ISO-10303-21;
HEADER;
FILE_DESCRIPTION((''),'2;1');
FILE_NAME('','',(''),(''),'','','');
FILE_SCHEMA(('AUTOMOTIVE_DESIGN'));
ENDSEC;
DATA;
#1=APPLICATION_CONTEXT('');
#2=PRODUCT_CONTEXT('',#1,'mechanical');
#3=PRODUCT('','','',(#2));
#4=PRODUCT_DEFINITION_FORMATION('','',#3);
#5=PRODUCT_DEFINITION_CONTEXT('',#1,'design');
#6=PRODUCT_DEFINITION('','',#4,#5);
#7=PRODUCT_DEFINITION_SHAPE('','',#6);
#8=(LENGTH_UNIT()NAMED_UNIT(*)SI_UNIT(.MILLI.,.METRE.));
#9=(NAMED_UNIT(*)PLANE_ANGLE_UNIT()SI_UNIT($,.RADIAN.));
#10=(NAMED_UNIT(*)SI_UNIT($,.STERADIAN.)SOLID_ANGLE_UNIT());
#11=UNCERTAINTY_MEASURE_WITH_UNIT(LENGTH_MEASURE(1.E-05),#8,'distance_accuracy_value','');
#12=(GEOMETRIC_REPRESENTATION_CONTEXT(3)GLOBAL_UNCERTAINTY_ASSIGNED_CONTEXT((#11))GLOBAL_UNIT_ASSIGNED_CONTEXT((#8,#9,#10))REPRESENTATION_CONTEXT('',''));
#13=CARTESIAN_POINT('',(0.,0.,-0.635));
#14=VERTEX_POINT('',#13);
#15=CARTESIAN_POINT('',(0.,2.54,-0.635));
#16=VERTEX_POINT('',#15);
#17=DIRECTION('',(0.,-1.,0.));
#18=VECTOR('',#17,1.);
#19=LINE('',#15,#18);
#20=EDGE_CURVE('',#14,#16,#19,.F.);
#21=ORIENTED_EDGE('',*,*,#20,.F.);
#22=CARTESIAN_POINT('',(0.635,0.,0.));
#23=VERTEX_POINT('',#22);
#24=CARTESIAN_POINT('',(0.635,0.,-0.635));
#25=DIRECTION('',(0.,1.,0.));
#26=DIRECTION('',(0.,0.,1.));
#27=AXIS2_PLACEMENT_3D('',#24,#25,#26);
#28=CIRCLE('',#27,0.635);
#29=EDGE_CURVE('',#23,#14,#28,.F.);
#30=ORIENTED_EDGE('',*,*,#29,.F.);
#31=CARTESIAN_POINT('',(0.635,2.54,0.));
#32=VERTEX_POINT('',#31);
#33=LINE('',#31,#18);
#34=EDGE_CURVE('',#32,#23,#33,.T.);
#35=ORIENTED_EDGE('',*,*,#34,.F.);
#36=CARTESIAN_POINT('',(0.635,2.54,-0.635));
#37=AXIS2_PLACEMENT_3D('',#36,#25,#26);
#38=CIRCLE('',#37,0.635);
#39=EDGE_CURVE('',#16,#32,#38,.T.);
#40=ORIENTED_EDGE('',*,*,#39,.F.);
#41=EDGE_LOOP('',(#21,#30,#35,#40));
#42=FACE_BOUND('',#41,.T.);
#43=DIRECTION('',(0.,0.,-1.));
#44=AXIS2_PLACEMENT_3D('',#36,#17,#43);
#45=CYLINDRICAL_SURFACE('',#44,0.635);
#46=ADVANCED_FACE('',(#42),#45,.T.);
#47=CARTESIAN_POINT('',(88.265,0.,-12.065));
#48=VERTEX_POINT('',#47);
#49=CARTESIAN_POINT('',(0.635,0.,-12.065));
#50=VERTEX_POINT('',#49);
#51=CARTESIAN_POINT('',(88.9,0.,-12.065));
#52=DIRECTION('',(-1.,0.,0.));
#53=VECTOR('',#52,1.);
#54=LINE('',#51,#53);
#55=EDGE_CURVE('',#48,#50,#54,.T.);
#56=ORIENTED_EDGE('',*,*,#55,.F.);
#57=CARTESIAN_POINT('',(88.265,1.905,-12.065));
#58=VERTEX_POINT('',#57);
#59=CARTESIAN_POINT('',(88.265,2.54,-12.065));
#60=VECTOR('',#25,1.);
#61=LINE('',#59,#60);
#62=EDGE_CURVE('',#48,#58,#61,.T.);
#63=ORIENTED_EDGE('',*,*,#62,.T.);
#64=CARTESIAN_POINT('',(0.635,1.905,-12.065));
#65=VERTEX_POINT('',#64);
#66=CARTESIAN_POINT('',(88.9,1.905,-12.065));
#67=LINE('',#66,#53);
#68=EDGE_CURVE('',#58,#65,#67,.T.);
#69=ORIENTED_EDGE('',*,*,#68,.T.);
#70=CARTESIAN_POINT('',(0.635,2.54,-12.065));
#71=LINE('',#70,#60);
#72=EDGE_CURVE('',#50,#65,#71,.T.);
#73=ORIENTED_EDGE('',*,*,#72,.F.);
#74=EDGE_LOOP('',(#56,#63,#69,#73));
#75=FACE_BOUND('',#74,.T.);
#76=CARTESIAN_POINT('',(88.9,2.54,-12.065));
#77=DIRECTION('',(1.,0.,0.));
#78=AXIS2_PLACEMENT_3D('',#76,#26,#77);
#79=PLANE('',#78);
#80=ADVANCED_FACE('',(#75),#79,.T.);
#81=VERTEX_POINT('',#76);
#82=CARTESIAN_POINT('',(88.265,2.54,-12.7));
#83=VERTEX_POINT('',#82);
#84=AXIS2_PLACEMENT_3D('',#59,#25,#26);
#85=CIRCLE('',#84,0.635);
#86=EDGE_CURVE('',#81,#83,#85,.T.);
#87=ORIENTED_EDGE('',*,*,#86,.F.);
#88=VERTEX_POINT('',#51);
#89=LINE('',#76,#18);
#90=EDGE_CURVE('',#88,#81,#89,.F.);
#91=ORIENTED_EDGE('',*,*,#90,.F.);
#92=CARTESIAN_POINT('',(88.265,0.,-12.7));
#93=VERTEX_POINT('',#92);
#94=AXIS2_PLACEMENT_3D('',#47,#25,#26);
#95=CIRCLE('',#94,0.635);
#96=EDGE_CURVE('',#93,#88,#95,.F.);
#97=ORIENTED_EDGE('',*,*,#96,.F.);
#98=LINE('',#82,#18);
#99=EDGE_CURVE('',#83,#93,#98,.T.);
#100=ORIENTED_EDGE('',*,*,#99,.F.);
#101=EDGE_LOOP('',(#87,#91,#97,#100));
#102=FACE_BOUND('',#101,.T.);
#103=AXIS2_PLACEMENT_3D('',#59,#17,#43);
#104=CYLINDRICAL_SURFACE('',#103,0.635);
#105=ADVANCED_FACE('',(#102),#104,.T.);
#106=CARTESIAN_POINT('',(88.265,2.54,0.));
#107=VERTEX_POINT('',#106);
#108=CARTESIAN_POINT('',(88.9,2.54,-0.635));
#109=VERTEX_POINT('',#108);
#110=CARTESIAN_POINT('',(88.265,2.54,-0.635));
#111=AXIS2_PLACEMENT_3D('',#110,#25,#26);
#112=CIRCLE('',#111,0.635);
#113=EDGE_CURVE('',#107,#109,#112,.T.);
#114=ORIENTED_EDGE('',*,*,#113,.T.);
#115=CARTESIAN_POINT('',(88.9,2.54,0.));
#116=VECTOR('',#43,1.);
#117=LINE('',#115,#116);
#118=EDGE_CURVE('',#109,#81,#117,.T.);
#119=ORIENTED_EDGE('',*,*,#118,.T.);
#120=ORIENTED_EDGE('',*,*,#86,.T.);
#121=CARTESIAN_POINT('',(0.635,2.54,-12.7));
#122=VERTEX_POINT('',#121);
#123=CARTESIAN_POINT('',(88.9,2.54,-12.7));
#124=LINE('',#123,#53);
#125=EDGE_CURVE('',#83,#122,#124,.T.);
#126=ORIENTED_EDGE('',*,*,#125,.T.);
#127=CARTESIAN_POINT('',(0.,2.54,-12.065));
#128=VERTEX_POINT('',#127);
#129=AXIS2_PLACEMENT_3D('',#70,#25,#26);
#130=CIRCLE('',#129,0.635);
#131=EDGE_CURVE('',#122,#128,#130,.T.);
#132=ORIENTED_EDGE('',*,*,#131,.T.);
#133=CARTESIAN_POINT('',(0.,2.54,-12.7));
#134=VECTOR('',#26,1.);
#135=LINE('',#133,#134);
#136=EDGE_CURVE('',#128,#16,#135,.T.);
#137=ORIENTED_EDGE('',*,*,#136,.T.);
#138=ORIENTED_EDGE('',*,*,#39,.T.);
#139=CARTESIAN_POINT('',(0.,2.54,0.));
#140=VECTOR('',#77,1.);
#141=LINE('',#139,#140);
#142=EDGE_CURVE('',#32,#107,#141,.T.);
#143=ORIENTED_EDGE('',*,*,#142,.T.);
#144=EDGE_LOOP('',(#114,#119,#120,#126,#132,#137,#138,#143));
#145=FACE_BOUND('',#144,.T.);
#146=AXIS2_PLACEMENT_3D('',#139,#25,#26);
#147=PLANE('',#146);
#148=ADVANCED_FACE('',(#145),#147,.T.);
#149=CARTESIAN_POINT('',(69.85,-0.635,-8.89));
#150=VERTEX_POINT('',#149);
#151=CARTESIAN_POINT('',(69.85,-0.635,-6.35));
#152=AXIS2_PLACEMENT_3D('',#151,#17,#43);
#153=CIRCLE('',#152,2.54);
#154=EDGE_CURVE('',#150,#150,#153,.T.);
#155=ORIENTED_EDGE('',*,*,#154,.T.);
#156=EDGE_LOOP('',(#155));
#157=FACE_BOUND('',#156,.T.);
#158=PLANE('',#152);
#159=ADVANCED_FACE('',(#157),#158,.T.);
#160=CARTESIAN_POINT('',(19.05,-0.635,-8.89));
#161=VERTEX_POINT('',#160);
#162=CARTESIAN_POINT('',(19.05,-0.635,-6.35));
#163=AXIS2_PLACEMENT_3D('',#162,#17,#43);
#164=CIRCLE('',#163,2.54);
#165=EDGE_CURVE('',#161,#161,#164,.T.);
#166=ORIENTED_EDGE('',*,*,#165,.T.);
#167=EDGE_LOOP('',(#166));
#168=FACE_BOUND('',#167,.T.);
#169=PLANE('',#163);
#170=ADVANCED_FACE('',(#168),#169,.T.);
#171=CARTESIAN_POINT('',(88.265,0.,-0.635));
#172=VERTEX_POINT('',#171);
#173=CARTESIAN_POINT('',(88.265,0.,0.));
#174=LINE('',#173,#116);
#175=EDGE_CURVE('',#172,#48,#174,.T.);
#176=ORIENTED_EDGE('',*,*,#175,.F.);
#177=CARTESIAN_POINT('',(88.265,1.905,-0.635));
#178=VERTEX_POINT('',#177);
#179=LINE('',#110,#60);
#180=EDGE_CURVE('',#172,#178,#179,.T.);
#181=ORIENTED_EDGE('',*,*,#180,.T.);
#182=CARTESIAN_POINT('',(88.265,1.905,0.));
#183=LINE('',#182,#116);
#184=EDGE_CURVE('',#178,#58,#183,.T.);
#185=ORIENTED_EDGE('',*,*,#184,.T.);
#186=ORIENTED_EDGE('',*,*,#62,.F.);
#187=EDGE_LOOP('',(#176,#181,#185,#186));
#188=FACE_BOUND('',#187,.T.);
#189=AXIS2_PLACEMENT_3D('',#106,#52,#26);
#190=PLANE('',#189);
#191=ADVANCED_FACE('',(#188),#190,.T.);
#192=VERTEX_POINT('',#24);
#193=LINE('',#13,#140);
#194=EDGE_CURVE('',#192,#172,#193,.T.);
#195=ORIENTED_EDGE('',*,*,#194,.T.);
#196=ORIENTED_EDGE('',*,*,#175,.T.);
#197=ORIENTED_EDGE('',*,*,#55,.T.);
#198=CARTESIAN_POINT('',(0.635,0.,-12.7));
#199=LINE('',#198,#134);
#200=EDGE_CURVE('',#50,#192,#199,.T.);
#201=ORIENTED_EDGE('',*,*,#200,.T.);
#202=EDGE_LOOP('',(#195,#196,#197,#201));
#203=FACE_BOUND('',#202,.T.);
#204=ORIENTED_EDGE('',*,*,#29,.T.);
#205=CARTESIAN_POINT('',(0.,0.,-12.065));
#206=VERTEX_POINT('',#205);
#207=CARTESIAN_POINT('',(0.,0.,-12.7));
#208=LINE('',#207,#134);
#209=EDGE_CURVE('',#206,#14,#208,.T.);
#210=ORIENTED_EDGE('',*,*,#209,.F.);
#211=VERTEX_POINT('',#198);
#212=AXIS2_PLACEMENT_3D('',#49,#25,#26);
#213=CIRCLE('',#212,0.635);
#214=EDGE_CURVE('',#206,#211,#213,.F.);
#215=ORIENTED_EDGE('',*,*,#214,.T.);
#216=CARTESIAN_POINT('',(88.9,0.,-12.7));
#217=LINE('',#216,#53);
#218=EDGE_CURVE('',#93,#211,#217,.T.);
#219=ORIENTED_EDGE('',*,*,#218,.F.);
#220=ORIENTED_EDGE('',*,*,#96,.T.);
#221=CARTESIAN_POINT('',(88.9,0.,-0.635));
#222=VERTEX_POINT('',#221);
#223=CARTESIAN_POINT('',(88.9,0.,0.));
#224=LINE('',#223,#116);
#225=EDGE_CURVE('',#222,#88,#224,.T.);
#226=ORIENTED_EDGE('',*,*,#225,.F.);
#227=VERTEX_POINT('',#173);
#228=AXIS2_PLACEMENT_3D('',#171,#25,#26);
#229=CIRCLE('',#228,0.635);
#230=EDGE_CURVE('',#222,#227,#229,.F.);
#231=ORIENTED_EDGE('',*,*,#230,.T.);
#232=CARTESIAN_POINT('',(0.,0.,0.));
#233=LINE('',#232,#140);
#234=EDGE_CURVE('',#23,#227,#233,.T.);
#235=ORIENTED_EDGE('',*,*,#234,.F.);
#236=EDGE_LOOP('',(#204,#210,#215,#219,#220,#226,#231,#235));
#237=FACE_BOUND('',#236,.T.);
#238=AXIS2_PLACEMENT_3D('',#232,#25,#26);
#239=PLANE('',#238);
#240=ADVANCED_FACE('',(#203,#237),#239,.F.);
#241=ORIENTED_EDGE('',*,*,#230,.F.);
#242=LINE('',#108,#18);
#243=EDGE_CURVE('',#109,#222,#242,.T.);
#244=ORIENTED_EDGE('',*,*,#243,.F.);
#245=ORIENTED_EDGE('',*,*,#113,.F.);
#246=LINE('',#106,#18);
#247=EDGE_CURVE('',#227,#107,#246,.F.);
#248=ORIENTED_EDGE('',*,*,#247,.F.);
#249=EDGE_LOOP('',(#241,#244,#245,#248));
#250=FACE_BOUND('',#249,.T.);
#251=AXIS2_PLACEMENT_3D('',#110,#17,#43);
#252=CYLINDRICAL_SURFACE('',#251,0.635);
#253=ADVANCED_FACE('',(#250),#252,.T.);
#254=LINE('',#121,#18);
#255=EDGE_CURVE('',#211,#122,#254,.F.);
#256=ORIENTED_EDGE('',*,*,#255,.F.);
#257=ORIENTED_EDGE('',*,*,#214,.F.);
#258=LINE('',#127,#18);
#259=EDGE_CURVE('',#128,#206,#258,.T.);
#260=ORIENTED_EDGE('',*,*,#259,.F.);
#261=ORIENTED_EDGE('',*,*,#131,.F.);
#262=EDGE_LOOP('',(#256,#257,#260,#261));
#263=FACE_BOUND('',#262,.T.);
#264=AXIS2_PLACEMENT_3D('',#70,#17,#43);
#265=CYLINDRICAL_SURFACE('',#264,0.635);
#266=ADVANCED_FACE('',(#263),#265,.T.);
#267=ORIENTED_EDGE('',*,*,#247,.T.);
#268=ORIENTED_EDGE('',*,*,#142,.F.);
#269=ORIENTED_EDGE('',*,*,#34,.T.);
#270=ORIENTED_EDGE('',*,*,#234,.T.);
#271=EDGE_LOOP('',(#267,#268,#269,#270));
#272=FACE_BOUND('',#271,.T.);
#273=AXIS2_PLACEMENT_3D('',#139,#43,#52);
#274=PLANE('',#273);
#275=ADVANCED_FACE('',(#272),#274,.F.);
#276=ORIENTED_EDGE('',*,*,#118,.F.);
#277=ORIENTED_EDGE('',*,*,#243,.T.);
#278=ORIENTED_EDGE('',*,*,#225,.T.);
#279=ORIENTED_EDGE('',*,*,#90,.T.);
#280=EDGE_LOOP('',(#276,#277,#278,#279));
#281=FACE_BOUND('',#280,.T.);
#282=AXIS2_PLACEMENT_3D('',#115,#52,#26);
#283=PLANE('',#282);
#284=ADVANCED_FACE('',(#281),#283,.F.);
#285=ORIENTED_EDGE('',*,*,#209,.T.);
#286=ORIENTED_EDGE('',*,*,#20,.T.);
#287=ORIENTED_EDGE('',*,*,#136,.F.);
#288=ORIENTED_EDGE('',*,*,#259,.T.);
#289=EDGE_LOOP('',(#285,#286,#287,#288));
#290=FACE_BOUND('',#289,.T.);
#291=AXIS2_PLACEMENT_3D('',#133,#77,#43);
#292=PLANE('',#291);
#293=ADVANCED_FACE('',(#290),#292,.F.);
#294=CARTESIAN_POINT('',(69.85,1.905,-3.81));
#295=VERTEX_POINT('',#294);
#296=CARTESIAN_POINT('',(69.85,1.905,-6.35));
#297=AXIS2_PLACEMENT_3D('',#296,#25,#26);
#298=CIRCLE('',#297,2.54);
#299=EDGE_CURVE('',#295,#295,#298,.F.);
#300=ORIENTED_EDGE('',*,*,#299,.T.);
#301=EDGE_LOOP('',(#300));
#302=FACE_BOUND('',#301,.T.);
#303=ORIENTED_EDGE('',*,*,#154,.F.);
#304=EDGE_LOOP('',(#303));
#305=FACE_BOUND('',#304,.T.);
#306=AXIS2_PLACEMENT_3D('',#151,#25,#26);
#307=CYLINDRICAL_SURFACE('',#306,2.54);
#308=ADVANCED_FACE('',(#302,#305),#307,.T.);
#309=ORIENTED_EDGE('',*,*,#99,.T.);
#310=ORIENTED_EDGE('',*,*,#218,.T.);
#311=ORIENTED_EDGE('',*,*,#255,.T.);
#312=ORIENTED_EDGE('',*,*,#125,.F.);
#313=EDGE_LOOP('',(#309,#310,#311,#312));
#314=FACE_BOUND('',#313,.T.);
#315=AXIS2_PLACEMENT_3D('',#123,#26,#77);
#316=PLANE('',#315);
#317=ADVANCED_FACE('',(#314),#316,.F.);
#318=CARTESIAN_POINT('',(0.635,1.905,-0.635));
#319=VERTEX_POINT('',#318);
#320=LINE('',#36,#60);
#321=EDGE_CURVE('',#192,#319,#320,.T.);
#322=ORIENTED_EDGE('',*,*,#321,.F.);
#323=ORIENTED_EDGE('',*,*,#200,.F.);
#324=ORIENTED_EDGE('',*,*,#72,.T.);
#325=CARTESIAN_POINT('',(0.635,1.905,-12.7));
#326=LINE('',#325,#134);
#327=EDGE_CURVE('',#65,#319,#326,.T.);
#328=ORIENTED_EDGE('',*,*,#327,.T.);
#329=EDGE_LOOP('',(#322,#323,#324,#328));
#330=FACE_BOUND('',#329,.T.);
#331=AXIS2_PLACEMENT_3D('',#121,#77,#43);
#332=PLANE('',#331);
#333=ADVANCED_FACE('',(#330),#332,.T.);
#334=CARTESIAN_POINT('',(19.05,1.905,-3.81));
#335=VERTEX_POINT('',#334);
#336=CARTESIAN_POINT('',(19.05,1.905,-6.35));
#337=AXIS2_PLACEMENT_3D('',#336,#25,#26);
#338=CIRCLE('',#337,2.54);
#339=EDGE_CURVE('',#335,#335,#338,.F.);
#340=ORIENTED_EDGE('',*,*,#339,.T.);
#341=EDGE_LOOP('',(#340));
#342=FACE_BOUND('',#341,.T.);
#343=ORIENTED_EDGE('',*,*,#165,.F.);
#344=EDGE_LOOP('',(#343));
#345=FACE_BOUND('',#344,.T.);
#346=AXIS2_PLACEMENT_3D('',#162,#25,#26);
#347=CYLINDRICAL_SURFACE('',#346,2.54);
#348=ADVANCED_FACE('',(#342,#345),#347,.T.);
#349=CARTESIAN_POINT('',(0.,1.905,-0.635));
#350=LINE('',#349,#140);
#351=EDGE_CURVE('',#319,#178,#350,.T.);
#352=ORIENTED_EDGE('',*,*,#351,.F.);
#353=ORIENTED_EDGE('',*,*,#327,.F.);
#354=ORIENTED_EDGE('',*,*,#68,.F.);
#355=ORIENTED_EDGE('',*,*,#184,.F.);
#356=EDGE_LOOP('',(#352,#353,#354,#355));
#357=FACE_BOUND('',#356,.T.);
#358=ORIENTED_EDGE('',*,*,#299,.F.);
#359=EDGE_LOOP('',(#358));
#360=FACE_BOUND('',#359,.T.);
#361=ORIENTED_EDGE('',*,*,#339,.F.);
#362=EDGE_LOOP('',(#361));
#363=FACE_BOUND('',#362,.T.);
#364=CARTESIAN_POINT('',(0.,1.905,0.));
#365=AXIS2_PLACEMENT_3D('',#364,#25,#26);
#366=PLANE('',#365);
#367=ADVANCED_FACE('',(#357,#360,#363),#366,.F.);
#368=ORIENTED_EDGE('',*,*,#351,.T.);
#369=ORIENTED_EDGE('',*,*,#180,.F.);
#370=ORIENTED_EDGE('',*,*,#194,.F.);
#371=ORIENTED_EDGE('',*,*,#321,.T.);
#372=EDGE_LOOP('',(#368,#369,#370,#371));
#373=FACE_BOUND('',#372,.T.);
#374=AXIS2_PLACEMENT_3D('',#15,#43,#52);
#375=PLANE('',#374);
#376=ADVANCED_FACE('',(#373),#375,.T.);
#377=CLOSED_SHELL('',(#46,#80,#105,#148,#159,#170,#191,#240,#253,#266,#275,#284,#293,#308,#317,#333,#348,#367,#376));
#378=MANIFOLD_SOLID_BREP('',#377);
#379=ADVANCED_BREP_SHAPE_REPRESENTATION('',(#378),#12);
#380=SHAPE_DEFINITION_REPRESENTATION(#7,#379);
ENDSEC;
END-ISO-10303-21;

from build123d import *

# Parameters (mm, degrees)
SKETCH1_W           = 88.9
SKETCH1_H           = 12.7
BOSS_EXTRUDE1_DEPTH = 2.54
FILLET1_R           = 0.635
SHELL1_START        = 0.635
SHELL1_OUTLINE_W    = 1.905
SHELL1_OUTLINE_H    = 11.43
SHELL1_DEPTH        = 87.63
SKETCH2_R           = 2.54
BOSS_EXTRUDE2_DEPTH = 2.54


# Read off the part's stored shape, not the designer's step: Shell1
with BuildPart() as part:
    # Sketch1 → Boss-Extrude1 (new body)
    with BuildSketch(Plane(origin=(0, 0, 0), x_dir=(1, 0, 0), z_dir=(0, 1, 0))):
        with Locations((44.45, 6.35)):
            Rectangle(SKETCH1_W, SKETCH1_H)
    extrude(amount=BOSS_EXTRUDE1_DEPTH)

    # Fillet1
    fillet1_edges = [part.edges().sort_by_distance(p)[0] for p in [
        (0, 1.27, -12.7),
        (88.9, 1.27, -12.7),
        (88.9, 1.27, 0),
        (0, 1.27, 0),
    ]]
    fillet(fillet1_edges, radius=FILLET1_R)

    # Shell1 outline → Shell1 (cut)
    with BuildSketch(Plane.YZ.offset(SHELL1_START)):
        with Locations((0.9525, -6.35)):
            Rectangle(SHELL1_OUTLINE_W, SHELL1_OUTLINE_H)
    extrude(amount=SHELL1_DEPTH, mode=Mode.SUBTRACT)

    # Sketch2 → Boss-Extrude2 (add)
    with BuildSketch(Plane(origin=(0, 1.905, 0), x_dir=(-1, 0, 0), z_dir=(0, -1, 0))):
        with Locations(Location((-69.85, 6.35, 0), (0, 0, 270))):
            Circle(SKETCH2_R)
        with Locations(Location((-19.05, 6.35, 0), (0, 0, 270))):
            Circle(SKETCH2_R)
    extrude(amount=BOSS_EXTRUDE2_DEPTH)


solid = part.part
